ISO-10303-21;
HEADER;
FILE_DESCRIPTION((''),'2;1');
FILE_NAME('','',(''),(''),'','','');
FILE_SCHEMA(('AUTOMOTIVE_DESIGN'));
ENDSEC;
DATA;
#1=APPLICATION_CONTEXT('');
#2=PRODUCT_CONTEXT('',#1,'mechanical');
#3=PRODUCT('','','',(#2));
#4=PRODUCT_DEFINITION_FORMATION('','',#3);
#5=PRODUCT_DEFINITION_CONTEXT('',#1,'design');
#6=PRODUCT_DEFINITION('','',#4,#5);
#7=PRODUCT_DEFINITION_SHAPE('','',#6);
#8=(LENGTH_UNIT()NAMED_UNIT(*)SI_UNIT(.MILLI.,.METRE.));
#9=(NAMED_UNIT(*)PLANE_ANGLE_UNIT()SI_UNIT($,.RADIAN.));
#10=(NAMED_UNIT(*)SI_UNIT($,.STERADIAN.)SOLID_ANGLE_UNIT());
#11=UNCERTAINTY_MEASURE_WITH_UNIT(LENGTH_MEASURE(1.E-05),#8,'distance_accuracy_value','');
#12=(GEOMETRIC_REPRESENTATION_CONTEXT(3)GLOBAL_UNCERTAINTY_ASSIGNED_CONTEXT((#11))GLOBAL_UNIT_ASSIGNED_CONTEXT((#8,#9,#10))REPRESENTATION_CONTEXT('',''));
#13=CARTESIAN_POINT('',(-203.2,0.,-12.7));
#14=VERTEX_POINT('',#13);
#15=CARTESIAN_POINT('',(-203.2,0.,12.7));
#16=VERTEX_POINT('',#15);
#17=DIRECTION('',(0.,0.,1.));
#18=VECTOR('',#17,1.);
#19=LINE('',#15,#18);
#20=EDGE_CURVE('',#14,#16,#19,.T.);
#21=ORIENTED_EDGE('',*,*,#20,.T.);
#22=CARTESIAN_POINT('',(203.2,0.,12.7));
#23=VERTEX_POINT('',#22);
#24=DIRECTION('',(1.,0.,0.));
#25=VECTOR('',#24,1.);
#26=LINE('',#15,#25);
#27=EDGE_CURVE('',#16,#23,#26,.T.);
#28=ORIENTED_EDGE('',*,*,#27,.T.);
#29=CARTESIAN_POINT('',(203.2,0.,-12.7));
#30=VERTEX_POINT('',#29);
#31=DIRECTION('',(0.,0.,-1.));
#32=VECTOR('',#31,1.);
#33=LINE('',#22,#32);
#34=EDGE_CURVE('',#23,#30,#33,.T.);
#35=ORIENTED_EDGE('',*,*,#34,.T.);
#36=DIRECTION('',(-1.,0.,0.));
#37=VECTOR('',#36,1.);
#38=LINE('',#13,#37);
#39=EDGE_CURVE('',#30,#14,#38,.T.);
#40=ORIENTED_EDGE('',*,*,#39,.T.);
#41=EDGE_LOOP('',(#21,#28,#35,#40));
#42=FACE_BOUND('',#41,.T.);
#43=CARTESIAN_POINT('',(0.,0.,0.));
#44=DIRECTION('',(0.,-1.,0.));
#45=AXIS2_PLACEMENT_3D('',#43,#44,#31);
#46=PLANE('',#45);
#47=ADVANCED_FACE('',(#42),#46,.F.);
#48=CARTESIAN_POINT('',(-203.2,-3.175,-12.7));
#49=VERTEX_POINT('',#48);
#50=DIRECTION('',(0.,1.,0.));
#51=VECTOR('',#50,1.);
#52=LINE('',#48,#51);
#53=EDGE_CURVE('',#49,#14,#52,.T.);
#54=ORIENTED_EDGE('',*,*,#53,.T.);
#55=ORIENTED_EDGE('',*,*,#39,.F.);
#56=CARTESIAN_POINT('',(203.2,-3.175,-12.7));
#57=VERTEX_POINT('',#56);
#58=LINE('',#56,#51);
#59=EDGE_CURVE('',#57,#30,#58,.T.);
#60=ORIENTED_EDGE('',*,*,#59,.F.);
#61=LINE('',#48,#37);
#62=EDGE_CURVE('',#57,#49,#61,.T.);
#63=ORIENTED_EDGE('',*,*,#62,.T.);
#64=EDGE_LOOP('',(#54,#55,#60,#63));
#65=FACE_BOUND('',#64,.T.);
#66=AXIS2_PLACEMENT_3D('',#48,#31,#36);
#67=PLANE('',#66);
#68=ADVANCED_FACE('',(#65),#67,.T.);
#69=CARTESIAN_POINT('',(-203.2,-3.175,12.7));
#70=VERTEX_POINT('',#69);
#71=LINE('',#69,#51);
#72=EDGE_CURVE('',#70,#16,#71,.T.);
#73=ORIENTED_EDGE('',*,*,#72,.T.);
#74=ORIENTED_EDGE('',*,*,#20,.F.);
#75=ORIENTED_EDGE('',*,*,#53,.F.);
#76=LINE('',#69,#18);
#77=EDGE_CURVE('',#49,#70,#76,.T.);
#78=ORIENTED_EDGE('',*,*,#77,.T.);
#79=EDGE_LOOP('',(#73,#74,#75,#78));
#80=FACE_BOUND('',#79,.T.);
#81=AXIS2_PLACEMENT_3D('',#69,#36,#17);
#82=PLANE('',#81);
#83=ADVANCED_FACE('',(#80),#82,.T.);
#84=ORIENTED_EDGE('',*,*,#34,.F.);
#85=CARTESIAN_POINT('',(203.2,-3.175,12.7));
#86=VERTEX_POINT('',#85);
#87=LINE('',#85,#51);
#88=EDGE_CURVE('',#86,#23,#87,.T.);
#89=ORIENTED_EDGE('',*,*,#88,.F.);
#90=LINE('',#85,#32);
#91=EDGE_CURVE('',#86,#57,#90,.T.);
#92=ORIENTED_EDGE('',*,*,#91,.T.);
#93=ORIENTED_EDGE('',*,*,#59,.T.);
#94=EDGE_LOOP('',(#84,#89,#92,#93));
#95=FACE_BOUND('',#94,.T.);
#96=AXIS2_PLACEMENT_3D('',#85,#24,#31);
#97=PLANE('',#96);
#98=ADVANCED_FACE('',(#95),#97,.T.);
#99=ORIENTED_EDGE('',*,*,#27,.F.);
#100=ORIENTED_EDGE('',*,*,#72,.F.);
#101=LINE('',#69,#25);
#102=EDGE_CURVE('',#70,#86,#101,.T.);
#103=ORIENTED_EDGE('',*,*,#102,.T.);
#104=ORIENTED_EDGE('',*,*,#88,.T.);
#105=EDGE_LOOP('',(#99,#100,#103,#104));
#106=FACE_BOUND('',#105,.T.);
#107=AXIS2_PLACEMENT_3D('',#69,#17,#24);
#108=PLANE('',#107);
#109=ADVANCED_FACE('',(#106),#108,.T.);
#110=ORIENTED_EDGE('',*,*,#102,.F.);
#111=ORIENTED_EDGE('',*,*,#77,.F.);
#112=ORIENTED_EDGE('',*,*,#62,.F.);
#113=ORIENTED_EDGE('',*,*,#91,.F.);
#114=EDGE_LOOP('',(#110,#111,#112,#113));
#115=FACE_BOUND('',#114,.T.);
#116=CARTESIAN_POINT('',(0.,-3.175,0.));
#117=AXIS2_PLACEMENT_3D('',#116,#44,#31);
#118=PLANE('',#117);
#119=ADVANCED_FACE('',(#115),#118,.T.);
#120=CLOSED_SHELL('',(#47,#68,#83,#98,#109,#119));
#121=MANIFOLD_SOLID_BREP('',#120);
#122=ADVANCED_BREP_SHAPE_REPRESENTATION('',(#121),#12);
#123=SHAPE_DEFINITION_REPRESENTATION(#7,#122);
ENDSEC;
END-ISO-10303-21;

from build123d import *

# Parameters (mm, degrees)
SKETCH1_W          = 406.4
SKETCH1_H          = 25.4
BASE_FLANGE1_DEPTH = 3.175


# Sheet-metal steps are written as plain solids
with BuildPart() as part:
    # Sketch1 → Base-Flange1 (new body)
    with BuildSketch(Plane(origin=(0, 0, 0), x_dir=(1, 0, 0), z_dir=(0, 1, 0))):
        Rectangle(SKETCH1_W, SKETCH1_H)
    extrude(amount=-BASE_FLANGE1_DEPTH)


solid = part.part
